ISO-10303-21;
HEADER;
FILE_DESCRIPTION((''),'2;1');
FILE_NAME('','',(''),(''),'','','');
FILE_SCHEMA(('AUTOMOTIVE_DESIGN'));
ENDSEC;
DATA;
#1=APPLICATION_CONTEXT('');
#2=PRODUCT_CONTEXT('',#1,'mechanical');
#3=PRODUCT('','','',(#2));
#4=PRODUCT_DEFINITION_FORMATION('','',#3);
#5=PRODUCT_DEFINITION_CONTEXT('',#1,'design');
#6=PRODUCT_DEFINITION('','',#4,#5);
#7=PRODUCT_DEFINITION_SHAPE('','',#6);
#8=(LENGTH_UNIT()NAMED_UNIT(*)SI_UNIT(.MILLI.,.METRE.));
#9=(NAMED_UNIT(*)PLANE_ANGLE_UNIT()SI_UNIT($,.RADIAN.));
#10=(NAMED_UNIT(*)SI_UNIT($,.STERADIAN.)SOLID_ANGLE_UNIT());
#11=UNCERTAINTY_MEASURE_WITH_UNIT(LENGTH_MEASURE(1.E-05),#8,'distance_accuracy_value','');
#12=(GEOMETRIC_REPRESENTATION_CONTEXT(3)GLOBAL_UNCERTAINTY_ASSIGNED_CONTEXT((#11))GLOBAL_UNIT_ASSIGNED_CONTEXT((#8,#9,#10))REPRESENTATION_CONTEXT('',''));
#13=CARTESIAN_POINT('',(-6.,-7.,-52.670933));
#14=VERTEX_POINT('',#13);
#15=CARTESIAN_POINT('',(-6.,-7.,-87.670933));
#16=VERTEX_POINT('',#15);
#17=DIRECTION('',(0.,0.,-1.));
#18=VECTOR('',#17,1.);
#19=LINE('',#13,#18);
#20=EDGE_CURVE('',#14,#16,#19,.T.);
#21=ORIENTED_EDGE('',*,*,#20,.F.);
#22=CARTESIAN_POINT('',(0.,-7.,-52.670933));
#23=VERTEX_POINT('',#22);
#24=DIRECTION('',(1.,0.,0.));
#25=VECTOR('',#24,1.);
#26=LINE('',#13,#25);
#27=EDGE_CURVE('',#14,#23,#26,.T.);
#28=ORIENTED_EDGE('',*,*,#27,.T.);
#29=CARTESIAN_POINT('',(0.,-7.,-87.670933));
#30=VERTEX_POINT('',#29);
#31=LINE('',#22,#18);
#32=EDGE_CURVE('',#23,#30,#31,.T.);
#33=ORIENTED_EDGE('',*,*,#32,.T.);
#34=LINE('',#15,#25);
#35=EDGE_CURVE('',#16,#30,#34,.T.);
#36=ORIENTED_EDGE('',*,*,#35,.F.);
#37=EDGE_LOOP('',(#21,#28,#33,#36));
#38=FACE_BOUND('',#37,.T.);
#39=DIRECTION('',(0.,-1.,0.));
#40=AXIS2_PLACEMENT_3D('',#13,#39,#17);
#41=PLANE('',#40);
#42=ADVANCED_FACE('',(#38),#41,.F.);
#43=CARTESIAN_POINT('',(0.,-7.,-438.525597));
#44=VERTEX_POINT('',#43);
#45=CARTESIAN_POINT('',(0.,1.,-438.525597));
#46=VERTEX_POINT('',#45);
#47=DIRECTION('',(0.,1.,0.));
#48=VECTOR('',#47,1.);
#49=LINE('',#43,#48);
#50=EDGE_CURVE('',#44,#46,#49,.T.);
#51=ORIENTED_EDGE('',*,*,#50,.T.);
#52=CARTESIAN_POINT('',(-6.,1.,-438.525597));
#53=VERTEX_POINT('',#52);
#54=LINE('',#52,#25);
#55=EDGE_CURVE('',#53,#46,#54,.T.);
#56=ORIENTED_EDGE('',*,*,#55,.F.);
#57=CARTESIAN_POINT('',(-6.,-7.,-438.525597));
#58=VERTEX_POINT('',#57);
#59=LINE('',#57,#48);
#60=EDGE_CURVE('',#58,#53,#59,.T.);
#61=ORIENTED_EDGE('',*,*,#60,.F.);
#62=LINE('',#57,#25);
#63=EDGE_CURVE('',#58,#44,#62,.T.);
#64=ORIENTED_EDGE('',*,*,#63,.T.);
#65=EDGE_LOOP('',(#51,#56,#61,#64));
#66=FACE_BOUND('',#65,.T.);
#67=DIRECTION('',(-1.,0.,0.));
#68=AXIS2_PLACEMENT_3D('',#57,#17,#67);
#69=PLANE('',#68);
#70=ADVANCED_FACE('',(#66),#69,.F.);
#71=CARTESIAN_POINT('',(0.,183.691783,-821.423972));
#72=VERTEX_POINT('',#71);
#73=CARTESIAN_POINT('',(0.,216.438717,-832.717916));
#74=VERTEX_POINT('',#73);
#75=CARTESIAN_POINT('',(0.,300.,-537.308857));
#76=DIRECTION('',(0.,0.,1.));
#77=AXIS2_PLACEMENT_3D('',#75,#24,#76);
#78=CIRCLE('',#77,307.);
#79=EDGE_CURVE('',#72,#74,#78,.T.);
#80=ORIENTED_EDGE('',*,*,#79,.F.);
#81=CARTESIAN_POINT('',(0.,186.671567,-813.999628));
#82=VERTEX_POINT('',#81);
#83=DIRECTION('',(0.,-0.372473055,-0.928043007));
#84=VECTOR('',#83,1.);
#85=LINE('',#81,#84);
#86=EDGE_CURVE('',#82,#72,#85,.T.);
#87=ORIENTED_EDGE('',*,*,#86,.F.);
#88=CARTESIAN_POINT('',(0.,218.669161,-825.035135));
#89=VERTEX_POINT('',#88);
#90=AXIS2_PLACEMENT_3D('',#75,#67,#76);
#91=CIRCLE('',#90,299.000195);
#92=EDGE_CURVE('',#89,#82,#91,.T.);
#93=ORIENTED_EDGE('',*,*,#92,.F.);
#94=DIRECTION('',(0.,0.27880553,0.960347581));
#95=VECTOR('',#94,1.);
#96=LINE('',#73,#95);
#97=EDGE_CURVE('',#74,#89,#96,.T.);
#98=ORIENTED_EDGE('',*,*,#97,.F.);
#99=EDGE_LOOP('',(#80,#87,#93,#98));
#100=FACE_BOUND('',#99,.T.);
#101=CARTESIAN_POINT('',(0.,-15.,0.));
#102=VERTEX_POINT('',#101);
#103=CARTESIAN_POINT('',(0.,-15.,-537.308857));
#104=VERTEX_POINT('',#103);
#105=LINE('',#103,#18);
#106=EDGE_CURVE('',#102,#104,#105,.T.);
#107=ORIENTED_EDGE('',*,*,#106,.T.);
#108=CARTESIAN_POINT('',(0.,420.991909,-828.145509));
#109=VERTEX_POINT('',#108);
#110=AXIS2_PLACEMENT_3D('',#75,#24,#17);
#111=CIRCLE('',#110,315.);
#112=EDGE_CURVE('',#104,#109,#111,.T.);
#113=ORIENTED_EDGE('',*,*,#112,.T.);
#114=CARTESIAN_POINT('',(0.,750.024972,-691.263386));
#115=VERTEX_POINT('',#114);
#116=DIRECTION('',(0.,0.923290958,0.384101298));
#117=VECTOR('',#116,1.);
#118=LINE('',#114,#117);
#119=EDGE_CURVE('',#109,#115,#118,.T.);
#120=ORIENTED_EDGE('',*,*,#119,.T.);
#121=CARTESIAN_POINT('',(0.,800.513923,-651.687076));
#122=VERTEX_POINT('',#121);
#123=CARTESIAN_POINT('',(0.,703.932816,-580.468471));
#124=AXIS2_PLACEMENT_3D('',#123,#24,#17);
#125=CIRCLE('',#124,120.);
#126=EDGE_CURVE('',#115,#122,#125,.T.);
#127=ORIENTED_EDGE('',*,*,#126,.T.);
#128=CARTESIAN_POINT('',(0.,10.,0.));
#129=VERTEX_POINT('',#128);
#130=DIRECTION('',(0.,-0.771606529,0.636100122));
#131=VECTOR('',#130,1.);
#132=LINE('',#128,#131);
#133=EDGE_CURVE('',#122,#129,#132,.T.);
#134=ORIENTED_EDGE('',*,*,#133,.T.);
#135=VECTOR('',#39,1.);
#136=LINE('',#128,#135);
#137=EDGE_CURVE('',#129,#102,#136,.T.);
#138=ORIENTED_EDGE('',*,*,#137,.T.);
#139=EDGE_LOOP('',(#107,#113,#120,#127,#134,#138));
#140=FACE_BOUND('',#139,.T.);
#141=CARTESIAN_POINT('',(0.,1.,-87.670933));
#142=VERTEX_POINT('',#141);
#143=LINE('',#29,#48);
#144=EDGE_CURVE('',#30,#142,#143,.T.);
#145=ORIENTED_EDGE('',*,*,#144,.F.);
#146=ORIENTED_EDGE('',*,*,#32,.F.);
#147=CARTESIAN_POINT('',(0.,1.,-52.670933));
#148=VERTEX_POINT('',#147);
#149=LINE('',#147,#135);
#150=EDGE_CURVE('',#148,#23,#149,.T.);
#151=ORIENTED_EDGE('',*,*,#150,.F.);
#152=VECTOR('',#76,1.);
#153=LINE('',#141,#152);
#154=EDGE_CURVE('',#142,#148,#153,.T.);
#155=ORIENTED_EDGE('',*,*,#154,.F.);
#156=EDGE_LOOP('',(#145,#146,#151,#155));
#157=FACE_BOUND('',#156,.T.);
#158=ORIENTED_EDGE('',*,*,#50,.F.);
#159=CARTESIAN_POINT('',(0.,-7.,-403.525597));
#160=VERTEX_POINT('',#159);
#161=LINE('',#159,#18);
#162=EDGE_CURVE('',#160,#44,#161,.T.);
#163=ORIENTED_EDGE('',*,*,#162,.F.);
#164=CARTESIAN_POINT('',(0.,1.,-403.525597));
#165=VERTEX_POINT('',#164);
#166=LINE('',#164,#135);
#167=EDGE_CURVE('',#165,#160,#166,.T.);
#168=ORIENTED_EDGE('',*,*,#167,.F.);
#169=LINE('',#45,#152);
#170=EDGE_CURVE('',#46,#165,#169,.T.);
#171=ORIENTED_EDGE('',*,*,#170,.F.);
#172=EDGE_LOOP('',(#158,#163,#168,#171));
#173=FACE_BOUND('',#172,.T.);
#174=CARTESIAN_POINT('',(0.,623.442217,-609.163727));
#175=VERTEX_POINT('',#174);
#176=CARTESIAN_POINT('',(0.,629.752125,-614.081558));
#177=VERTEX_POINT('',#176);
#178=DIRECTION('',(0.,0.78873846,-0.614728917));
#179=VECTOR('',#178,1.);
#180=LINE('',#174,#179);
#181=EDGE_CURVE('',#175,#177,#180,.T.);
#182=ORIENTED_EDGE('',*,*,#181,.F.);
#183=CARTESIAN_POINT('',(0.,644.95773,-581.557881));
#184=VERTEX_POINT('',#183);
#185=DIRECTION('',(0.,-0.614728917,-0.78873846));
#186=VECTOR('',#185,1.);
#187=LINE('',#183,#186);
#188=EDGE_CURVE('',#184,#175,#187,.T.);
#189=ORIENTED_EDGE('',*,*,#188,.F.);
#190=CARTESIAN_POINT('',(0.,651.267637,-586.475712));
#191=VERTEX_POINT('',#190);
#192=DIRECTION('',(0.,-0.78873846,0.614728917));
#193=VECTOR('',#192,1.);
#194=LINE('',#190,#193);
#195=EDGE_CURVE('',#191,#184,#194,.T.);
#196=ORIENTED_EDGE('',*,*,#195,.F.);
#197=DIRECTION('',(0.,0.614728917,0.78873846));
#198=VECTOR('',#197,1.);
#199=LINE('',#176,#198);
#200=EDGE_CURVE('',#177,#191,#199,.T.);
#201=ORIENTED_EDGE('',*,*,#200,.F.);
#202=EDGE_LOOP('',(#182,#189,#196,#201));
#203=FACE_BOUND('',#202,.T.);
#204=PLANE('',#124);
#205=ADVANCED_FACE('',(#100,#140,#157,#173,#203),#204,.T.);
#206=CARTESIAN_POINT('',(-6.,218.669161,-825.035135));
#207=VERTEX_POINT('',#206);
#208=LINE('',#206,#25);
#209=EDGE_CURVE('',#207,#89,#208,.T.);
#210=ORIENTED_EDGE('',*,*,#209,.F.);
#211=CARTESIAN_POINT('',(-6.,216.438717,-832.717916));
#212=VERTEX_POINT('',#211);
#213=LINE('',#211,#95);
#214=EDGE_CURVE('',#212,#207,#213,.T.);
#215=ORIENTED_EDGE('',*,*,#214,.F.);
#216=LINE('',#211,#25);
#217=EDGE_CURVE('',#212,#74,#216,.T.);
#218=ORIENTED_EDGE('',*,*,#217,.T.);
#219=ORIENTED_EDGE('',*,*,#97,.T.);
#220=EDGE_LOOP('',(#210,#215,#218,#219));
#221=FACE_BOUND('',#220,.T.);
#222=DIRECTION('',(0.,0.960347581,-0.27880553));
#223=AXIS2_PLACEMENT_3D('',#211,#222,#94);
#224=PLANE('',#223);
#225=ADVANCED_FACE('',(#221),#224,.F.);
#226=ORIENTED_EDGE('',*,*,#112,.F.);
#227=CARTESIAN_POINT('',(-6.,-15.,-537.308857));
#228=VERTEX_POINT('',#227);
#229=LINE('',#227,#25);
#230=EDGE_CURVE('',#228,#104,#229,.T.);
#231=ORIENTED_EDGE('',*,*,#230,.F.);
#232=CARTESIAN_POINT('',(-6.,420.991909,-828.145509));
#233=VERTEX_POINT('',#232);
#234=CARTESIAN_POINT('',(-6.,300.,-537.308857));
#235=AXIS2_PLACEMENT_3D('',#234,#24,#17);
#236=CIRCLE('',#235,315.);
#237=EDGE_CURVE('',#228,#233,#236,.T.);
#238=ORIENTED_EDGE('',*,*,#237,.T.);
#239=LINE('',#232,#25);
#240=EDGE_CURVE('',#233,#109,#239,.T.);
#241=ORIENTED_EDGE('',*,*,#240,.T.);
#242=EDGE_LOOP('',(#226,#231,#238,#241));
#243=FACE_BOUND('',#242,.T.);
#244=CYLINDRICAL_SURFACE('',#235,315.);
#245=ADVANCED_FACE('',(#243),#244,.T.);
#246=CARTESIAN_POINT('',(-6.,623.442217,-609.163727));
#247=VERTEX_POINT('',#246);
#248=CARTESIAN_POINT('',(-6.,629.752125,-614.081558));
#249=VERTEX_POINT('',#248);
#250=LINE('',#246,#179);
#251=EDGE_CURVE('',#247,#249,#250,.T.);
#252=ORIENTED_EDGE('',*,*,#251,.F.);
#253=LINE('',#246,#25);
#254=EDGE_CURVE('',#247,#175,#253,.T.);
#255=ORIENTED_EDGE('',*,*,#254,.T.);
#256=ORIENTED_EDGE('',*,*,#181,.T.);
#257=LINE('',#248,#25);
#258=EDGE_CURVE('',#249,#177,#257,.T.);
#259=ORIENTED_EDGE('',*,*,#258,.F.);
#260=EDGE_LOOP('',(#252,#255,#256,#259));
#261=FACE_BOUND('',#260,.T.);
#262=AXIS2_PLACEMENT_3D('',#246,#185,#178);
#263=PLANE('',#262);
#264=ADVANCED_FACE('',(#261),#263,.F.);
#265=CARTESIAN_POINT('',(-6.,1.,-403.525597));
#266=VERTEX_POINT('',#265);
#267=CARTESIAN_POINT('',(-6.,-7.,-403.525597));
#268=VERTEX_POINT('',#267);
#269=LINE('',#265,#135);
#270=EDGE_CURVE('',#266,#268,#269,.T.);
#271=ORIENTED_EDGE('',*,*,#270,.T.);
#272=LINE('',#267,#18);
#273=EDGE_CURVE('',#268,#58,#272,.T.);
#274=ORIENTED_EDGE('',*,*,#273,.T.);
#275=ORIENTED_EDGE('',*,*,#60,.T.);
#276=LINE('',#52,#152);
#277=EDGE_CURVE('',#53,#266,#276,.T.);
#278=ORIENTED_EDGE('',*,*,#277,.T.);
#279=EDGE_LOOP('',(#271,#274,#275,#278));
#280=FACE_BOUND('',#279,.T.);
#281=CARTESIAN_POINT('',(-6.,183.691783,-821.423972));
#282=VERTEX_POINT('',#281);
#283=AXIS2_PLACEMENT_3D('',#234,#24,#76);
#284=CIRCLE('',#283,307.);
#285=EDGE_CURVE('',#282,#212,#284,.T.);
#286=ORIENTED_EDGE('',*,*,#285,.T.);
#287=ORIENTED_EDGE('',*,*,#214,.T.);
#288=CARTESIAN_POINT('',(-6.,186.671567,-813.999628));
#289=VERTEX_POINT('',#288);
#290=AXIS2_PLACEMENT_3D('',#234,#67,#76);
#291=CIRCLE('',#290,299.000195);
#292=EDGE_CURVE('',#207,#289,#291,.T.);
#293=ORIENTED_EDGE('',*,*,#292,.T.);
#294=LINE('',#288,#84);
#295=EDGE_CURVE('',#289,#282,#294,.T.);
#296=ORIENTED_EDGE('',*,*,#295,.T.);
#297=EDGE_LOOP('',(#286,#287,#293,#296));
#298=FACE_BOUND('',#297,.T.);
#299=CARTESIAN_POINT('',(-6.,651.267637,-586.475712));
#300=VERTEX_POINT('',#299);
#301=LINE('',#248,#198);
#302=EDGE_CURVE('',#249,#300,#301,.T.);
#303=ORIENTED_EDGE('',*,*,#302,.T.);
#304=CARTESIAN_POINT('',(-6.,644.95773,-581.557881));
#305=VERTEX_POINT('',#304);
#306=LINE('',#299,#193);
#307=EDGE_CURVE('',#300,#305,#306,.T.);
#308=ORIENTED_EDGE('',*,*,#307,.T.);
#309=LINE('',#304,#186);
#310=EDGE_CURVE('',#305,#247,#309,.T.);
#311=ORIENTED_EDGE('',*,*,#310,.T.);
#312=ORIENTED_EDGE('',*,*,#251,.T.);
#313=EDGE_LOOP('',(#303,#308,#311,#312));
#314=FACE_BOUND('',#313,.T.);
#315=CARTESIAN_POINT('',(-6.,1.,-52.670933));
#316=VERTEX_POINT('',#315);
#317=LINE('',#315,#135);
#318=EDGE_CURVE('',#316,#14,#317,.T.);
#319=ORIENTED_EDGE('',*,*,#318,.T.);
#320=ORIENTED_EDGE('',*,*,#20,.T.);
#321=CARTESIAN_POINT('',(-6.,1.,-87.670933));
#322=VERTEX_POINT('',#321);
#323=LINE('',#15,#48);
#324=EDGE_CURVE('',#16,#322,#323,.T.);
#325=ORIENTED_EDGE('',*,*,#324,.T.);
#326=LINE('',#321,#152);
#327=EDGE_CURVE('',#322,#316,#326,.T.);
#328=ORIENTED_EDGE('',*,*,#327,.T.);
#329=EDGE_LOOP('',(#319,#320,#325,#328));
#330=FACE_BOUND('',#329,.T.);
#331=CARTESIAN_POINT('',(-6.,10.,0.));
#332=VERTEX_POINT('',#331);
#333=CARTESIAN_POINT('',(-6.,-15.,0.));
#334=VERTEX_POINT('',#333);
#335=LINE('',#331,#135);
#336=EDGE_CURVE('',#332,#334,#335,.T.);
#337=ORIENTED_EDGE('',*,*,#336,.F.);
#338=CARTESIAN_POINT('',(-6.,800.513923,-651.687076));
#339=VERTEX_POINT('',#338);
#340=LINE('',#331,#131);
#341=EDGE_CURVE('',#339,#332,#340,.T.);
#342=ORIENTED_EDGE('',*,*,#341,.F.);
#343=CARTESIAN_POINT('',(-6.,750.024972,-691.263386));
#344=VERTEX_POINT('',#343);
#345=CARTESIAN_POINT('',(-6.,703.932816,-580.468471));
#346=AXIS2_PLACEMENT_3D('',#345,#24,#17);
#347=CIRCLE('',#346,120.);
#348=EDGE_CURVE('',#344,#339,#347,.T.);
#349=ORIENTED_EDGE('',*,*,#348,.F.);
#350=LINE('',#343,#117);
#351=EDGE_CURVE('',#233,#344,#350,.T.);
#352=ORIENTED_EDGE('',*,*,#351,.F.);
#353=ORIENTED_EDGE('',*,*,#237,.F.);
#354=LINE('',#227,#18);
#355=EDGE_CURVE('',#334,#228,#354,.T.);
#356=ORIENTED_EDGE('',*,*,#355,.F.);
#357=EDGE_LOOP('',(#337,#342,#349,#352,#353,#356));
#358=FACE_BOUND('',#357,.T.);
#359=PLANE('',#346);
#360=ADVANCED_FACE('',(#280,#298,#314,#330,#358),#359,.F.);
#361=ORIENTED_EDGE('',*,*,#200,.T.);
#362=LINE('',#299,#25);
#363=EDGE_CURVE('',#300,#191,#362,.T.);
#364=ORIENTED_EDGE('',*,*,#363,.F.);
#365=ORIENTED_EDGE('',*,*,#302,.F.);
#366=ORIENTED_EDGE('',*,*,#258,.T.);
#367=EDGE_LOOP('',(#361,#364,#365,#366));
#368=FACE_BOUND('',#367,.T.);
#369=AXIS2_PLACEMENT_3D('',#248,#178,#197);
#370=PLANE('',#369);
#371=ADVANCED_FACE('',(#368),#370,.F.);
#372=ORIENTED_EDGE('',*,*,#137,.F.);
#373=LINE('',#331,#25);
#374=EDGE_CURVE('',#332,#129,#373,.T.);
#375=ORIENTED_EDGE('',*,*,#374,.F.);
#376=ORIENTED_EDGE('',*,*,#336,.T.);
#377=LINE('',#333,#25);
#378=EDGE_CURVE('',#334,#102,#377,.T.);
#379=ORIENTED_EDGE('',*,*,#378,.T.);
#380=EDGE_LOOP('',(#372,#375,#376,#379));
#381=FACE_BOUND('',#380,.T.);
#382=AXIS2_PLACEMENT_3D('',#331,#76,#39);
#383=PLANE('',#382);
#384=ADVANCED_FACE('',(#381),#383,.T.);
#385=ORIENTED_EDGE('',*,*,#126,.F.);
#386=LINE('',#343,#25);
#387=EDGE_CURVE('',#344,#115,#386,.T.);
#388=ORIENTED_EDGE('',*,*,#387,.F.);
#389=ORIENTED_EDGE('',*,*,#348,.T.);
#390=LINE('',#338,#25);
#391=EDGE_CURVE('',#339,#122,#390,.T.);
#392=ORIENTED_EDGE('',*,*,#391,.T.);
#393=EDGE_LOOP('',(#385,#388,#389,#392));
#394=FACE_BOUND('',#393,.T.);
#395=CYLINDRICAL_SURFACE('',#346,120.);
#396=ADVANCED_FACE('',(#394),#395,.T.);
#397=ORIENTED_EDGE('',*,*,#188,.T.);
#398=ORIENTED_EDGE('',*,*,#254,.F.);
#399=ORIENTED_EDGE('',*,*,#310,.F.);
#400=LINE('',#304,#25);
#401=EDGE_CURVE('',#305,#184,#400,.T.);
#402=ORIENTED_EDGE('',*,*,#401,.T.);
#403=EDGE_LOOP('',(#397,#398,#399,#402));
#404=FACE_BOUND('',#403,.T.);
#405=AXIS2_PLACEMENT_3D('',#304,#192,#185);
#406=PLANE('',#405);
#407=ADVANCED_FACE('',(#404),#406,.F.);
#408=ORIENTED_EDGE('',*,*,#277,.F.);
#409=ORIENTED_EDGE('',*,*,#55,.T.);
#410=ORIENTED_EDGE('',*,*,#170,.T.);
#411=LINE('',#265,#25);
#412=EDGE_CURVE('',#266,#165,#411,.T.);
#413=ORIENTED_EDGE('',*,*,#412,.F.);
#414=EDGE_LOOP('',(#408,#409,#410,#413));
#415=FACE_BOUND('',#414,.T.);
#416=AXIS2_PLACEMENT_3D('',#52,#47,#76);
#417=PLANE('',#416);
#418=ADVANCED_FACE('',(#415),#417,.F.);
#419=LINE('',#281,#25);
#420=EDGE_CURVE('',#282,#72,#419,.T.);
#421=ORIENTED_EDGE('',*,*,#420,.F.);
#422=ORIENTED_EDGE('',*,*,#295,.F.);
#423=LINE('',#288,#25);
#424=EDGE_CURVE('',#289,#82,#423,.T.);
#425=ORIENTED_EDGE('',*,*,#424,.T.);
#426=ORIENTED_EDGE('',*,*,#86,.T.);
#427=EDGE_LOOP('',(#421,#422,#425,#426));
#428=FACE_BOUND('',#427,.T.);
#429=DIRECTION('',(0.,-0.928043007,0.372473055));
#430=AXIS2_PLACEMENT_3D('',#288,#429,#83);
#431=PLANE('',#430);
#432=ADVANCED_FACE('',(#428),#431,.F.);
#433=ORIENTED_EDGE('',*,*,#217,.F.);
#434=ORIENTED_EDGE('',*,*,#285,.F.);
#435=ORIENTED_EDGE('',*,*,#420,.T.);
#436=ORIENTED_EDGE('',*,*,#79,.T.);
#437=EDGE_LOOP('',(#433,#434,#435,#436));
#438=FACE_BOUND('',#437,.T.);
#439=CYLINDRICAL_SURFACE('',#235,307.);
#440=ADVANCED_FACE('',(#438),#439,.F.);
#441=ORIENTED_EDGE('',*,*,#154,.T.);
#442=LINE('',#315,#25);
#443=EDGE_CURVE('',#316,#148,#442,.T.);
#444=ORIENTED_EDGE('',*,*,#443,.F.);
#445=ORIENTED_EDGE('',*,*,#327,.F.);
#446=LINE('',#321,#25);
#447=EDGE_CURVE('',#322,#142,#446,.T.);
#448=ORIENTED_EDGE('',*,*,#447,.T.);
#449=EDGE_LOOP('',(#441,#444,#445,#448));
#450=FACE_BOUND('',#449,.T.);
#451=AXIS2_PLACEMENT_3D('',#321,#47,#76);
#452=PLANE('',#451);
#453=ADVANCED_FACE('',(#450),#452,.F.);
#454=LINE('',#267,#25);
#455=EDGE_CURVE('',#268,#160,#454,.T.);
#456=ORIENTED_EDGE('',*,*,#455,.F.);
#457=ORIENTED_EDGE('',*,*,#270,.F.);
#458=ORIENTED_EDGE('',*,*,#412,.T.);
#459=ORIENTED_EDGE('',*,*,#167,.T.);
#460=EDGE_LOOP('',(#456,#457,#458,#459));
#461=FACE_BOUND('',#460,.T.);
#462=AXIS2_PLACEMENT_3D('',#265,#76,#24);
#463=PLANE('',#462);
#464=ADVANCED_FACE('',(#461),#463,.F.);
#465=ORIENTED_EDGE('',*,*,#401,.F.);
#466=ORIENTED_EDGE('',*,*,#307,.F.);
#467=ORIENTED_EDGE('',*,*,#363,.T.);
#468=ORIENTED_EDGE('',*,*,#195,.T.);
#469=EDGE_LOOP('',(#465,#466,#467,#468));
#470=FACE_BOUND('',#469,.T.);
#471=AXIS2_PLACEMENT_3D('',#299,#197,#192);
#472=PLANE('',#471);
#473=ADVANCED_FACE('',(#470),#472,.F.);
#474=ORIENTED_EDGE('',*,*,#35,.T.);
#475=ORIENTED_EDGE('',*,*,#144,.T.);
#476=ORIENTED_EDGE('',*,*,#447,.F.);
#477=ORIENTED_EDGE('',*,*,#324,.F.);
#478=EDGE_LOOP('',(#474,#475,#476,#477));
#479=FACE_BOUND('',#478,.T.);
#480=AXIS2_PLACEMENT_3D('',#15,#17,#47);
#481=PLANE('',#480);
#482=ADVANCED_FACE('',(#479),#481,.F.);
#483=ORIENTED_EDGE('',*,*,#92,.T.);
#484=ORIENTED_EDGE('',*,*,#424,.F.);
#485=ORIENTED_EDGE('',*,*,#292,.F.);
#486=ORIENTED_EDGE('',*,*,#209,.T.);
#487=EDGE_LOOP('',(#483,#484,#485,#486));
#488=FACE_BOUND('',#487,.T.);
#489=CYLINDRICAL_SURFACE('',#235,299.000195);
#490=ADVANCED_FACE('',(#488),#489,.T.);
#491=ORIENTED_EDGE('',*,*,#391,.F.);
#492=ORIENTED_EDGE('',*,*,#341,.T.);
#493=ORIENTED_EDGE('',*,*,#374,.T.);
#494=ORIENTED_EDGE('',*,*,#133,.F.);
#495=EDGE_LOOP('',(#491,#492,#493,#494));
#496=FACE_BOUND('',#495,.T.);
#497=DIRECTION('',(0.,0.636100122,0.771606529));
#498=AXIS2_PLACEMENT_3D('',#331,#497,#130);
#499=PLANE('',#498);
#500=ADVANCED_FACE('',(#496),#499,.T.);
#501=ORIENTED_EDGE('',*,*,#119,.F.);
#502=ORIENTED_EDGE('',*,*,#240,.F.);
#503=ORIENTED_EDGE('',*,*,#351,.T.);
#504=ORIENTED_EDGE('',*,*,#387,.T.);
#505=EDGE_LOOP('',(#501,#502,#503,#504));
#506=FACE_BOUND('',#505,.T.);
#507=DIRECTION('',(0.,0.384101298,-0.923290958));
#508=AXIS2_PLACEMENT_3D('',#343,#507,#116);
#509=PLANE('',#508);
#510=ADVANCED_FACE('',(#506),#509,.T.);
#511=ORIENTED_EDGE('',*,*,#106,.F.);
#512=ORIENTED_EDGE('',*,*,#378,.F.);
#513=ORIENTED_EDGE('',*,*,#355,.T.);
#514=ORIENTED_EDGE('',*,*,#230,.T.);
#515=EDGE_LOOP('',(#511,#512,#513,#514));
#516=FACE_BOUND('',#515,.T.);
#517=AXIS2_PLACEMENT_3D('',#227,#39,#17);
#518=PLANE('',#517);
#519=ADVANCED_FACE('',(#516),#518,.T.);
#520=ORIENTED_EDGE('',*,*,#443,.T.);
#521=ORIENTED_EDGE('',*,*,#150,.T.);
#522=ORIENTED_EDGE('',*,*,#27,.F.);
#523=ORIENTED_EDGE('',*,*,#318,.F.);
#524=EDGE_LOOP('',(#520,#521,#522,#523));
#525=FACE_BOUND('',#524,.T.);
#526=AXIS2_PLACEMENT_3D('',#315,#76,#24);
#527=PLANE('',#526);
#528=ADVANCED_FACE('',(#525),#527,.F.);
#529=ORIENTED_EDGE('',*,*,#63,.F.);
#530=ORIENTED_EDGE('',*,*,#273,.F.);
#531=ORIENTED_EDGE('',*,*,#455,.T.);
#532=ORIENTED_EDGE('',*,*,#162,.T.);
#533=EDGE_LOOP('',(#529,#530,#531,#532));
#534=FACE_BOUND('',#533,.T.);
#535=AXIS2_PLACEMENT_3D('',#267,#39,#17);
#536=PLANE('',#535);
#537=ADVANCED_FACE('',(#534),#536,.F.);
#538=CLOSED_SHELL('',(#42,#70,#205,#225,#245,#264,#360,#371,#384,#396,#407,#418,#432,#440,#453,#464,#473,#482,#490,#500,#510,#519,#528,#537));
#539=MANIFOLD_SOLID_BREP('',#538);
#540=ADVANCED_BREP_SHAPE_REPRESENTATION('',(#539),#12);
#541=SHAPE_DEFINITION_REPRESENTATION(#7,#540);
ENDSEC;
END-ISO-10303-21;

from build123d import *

# Parameters (mm, degrees)
BASE_FLANGE1_DEPTH = 6
SKETCH3_W          = 35
SKETCH3_H          = 8
CUT_EXTRUDE2_DEPTH = 6


# Sheet-metal steps are written as plain solids
with BuildPart() as part:
    # Sketch1 → Base-Flange1 (new body)
    with BuildSketch(Plane(origin=(0, 0, 0), x_dir=(0, 0, -1), z_dir=(1, 0, 0))):
        with BuildLine():
            Line((691.263386145, 750.024971585), (828.145509118, 420.991908823))
            ThreePointArc((828.145509118, 420.991908823), (799.356039458, 125.196469257), (537.308857372, -15))
            Line((537.308857372, -15), (0, -15))
            Line((0, -15), (0, 10))
            Line((0, 10), (651.687076161, 800.513923243))
            ThreePointArc((651.687076161, 800.513923243), (674.911649445, 777.963121002), (691.263386145, 750.024971585))
        make_face()
    extrude(amount=-BASE_FLANGE1_DEPTH)

    # Sketch3 → Cut-Extrude2 (cut)
    with BuildSketch(Plane(origin=(0, 0, 0), x_dir=(0, 0, -1), z_dir=(1, 0, 0))):
        with BuildLine():
            Line((832.717916058, 216.438716825), (825.035135409, 218.669161062))
            ThreePointArc((825.035135409, 218.669161062), (819.970515176, 202.5140849), (813.999628283, 186.671566993))
            Line((813.999628283, 186.671566993), (821.42397234, 183.691782549))
            ThreePointArc((821.42397234, 183.691782549), (827.533179903, 199.905831283), (832.717916058, 216.438716825))
        make_face()
        with Locations((70.170932866, -3)):
            Rectangle(SKETCH3_W, SKETCH3_H)
        with Locations((421.025597194, -3)):
            Rectangle(SKETCH3_W, SKETCH3_H)
        Polygon((581.55788083, 644.957729578), (609.163726943, 623.44221749), (614.081558277, 629.752125173), (586.475712165, 651.267637261), align=None)
    extrude(amount=-CUT_EXTRUDE2_DEPTH, mode=Mode.SUBTRACT)


solid = part.part
